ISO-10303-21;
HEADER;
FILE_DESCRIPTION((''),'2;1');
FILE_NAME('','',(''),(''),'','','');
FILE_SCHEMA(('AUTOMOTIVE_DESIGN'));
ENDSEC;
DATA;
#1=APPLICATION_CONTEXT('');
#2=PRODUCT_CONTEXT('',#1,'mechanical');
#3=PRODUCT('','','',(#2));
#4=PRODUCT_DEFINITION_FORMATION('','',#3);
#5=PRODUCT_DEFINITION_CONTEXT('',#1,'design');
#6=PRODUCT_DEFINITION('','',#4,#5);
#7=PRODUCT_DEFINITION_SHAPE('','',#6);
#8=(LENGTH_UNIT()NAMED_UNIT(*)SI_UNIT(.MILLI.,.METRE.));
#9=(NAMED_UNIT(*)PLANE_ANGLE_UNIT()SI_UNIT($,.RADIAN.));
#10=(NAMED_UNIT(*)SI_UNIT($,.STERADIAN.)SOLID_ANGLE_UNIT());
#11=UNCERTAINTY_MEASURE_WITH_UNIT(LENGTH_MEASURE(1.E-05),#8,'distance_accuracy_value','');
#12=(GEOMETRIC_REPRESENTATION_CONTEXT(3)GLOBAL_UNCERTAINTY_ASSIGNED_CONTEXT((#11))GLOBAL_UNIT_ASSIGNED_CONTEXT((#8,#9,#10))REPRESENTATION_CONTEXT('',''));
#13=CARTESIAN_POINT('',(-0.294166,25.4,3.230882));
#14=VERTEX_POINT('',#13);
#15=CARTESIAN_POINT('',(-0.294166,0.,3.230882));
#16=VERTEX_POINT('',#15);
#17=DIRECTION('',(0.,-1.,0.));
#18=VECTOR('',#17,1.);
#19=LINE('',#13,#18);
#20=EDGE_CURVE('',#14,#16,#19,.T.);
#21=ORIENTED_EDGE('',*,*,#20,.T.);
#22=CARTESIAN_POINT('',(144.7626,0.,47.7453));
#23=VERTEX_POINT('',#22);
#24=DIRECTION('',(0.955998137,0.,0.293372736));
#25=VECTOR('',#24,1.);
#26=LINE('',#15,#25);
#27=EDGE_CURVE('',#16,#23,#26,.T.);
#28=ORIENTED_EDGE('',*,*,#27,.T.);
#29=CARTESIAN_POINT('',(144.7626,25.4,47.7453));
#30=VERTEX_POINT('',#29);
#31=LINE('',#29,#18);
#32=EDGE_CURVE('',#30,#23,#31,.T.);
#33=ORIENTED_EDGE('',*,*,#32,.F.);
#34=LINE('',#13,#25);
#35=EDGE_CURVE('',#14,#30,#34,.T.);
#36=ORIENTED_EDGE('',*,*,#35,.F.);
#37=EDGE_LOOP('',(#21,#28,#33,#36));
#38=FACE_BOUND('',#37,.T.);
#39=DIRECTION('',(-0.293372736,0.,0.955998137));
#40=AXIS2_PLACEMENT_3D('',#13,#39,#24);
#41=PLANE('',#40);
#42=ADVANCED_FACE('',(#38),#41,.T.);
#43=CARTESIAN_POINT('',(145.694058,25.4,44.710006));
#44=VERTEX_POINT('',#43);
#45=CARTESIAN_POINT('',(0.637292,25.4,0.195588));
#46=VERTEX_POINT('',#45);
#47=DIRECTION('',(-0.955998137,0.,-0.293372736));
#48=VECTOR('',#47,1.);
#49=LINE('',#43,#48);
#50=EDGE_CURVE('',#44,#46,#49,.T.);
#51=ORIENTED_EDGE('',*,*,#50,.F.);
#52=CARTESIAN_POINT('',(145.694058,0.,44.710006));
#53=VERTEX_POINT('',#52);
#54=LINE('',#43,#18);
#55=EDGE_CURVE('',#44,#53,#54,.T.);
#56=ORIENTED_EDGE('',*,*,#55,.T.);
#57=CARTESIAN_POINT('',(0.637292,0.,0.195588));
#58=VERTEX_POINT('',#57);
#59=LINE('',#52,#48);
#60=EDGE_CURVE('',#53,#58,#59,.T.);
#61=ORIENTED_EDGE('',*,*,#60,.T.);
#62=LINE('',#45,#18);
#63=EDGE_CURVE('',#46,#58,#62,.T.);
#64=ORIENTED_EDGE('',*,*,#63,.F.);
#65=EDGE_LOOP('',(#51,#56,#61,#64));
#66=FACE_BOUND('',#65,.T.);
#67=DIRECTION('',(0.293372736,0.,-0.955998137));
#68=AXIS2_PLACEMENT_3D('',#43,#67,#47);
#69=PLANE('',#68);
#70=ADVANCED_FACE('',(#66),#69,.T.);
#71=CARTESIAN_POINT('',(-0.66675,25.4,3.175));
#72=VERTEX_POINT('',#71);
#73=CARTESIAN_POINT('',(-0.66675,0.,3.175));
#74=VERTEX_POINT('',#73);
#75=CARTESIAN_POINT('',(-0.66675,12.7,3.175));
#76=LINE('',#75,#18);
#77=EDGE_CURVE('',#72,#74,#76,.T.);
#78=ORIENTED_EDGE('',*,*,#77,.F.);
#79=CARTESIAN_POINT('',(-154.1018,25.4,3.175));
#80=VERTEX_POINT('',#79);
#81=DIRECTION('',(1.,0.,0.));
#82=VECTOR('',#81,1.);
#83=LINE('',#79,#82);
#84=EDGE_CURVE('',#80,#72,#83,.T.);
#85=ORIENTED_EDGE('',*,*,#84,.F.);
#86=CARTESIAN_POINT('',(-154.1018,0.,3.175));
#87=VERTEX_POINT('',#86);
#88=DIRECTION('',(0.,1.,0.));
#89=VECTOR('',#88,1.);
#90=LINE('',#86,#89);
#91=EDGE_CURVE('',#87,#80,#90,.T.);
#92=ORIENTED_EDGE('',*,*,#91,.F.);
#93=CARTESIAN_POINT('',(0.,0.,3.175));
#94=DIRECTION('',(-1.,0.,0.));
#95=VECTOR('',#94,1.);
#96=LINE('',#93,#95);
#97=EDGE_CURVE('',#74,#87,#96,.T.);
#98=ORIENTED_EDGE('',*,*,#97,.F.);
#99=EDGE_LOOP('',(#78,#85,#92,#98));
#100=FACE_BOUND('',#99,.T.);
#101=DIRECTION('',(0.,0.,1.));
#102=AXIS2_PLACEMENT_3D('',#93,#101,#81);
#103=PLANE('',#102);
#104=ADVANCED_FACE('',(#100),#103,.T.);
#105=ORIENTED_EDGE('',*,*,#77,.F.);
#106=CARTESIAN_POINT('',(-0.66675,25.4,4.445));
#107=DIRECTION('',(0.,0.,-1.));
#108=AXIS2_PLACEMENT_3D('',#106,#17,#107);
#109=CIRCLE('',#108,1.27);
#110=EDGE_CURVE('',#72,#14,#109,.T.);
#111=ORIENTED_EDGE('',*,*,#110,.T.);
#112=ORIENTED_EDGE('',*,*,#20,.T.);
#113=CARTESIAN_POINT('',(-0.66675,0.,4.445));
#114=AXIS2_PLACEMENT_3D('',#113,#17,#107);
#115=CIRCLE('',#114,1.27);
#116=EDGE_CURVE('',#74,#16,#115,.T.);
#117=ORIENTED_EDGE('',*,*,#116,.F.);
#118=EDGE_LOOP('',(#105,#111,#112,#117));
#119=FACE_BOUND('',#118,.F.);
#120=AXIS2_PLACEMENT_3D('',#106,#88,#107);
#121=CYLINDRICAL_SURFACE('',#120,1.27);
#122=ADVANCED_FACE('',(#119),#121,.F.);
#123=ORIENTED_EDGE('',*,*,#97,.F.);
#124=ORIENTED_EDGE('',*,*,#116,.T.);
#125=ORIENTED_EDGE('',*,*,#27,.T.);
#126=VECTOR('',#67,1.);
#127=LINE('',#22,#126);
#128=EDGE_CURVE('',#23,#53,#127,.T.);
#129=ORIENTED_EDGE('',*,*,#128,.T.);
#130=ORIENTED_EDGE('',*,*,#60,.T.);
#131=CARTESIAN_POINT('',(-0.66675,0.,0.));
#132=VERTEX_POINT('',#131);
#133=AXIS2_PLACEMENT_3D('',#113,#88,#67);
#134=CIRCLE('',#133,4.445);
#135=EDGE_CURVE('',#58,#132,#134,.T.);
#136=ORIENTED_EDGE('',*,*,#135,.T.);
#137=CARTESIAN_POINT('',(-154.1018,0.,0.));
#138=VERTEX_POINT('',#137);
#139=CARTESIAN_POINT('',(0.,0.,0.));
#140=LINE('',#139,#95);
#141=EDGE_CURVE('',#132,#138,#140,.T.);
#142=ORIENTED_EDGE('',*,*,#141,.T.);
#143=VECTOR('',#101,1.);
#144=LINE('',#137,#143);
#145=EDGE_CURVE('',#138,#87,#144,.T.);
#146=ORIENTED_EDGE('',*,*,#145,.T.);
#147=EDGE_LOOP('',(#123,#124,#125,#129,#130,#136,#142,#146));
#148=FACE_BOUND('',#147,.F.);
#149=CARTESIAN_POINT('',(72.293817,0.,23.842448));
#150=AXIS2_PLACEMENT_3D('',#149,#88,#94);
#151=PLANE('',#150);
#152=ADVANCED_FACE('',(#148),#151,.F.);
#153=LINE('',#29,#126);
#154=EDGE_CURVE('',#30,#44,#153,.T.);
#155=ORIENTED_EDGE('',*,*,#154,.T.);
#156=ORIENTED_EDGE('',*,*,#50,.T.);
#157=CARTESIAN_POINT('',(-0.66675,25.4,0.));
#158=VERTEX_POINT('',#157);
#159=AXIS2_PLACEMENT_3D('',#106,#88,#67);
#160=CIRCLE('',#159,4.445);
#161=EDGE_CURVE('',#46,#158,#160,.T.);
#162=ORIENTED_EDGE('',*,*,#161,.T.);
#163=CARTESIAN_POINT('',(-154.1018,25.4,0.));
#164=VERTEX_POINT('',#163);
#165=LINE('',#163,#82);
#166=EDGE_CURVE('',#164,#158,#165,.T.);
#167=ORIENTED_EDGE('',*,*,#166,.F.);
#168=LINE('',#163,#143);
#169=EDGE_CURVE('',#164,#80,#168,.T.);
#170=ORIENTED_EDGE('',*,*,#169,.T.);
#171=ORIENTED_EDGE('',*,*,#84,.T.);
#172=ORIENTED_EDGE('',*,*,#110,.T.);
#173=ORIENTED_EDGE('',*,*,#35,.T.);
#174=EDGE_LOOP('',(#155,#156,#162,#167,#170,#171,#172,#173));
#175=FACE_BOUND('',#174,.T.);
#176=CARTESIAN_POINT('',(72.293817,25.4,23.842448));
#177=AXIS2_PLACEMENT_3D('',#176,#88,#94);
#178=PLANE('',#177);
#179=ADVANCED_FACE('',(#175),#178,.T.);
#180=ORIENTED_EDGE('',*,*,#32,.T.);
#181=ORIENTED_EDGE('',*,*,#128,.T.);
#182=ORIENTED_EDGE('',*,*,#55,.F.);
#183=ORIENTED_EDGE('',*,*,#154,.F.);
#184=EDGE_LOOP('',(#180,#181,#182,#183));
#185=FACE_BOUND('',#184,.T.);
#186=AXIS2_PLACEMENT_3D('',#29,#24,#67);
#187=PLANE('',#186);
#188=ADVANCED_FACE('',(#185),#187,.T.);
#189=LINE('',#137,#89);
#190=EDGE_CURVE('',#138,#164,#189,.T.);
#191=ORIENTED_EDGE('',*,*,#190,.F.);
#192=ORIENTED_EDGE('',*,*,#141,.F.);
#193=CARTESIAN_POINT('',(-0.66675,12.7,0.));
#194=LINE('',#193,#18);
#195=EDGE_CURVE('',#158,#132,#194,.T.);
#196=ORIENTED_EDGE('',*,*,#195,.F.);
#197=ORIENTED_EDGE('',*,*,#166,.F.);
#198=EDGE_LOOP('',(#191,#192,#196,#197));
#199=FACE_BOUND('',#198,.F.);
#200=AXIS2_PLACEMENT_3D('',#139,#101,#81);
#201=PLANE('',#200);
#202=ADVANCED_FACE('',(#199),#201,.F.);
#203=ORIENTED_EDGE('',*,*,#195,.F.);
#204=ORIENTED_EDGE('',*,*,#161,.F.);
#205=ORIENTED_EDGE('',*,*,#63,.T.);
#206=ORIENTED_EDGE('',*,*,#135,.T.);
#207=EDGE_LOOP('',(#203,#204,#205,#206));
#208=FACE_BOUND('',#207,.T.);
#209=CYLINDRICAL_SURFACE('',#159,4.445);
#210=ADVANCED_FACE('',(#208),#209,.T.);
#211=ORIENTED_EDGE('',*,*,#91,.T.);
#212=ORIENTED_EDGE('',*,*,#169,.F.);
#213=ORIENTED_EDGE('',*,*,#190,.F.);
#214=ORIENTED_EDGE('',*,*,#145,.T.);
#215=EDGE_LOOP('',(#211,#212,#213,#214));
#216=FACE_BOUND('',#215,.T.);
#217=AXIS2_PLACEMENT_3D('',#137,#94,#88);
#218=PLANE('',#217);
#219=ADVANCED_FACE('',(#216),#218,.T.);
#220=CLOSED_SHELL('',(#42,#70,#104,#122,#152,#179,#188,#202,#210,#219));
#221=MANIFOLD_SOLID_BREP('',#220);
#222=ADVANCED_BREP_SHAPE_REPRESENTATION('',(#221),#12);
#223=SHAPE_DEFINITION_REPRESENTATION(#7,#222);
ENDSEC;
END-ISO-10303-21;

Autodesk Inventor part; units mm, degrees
ref_plane "YZ Plane" through (0, 0, 0) normal (1, 0, 0) x (0, 1, 0)
ref_plane "XZ Plane" through (0, 0, 0) normal (0, 1, 0) x (-1, 0, 0)
ref_plane "XY Plane" through (0, 0, 0) normal (0, 0, 1) x (1, 0, 0)
sketch "Sketch1" plane through (0, 0, 0) normal (0, 0, 1) x (1, 0, 0)
  line L0 (0, 0) -> (-154.1018, 0)
  line L1 (-154.1018, 0) -> (-154.1018, 25.4)
  line L2 (-154.1018, 25.4) -> (0, 25.4)
  line L3 (0, 25.4) -> (0, 0)
  dimension "d0" = 154.1018
  dimension "d1" = 25.4
extrude "Plate1" add sketch "Sketch1" along normal blind 3.175
sketch "Sketch2" plane through (0, 0, 3.175) normal (0, 0, 1) x (1, 0, 0)
  line L0 (-154.1018, 0) -> (-154.1018, 25.4) projected
  line L1 (0, 0) -> (-154.1018, 0) projected
  line L2 (0, 25.4) -> (0, 0) projected
  line L3 (-154.1018, 25.4) -> (0, 25.4) projected
  line L4 (-154.1018, 25.4) -> (-1.7018, 25.4)
  line L5 (-1.7018, 25.4) -> (-77.0509, 0)
  dimension "d3" = 152.4
sketch "Sketch3" plane through (-0.9315, 25.4, 3.0353) normal (0.293373, 0, -0.9559981) x (0, 1, 0)
  line L0 (-25.4, 0) -> (0, 0)
  line L1 (0, 0) -> (0, 152.4)
  line L2 (0, 152.4) -> (-25.4, 152.4)
  line L3 (-25.4, 152.4) -> (-25.4, 0)
edge flange "Flange1" height 152.4 angle 17.06 thickness 3.175 bend radius 1.27 thickness toward (0.293373, 0, -0.9559981) relief straight relief width 3.175 relief depth 1.5875 edges at (0, 12.7, 3.175) wall of the first edge with corners at (-0.9315, 0, 3.0353) (-0.9315, 25.4, 3.0353) (144.7626, 25.4, 47.7453) (144.7626, 0, 47.7453)
bend "Bend1"
corner "Corner1"
equation "\"d4\" = BendReliefWidth"
equation "\"d5\" = BendReliefDepth"
equation "\"d6\" = MinimumRemnant"
equation "\"d7\" = BendRadius"
equation "\"d11\" = CornerReliefSize"
equation "\"d12\" = GapSize"
equation "\"d13\" = JacobiRadiusSize"
equation "\"BendRadius\" = Thickness"
equation "\"BendReliefWidth\" = Thickness"
equation "\"BendReliefDepth\" = 0.5 * Thickness"
equation "\"CornerReliefSize\" = 4 * Thickness"
equation "\"MinimumRemnant\" = 2 * Thickness"
equation "\"TransitionRadius\" = BendRadius"
equation "\"JacobiRadiusSize\" = Thickness"
equation "\"GapSize\" = Thickness"
equation "\"d2\" = BendRadius"
equation "\"Thickness\" = 3.175"
properties part number "bent plough"
